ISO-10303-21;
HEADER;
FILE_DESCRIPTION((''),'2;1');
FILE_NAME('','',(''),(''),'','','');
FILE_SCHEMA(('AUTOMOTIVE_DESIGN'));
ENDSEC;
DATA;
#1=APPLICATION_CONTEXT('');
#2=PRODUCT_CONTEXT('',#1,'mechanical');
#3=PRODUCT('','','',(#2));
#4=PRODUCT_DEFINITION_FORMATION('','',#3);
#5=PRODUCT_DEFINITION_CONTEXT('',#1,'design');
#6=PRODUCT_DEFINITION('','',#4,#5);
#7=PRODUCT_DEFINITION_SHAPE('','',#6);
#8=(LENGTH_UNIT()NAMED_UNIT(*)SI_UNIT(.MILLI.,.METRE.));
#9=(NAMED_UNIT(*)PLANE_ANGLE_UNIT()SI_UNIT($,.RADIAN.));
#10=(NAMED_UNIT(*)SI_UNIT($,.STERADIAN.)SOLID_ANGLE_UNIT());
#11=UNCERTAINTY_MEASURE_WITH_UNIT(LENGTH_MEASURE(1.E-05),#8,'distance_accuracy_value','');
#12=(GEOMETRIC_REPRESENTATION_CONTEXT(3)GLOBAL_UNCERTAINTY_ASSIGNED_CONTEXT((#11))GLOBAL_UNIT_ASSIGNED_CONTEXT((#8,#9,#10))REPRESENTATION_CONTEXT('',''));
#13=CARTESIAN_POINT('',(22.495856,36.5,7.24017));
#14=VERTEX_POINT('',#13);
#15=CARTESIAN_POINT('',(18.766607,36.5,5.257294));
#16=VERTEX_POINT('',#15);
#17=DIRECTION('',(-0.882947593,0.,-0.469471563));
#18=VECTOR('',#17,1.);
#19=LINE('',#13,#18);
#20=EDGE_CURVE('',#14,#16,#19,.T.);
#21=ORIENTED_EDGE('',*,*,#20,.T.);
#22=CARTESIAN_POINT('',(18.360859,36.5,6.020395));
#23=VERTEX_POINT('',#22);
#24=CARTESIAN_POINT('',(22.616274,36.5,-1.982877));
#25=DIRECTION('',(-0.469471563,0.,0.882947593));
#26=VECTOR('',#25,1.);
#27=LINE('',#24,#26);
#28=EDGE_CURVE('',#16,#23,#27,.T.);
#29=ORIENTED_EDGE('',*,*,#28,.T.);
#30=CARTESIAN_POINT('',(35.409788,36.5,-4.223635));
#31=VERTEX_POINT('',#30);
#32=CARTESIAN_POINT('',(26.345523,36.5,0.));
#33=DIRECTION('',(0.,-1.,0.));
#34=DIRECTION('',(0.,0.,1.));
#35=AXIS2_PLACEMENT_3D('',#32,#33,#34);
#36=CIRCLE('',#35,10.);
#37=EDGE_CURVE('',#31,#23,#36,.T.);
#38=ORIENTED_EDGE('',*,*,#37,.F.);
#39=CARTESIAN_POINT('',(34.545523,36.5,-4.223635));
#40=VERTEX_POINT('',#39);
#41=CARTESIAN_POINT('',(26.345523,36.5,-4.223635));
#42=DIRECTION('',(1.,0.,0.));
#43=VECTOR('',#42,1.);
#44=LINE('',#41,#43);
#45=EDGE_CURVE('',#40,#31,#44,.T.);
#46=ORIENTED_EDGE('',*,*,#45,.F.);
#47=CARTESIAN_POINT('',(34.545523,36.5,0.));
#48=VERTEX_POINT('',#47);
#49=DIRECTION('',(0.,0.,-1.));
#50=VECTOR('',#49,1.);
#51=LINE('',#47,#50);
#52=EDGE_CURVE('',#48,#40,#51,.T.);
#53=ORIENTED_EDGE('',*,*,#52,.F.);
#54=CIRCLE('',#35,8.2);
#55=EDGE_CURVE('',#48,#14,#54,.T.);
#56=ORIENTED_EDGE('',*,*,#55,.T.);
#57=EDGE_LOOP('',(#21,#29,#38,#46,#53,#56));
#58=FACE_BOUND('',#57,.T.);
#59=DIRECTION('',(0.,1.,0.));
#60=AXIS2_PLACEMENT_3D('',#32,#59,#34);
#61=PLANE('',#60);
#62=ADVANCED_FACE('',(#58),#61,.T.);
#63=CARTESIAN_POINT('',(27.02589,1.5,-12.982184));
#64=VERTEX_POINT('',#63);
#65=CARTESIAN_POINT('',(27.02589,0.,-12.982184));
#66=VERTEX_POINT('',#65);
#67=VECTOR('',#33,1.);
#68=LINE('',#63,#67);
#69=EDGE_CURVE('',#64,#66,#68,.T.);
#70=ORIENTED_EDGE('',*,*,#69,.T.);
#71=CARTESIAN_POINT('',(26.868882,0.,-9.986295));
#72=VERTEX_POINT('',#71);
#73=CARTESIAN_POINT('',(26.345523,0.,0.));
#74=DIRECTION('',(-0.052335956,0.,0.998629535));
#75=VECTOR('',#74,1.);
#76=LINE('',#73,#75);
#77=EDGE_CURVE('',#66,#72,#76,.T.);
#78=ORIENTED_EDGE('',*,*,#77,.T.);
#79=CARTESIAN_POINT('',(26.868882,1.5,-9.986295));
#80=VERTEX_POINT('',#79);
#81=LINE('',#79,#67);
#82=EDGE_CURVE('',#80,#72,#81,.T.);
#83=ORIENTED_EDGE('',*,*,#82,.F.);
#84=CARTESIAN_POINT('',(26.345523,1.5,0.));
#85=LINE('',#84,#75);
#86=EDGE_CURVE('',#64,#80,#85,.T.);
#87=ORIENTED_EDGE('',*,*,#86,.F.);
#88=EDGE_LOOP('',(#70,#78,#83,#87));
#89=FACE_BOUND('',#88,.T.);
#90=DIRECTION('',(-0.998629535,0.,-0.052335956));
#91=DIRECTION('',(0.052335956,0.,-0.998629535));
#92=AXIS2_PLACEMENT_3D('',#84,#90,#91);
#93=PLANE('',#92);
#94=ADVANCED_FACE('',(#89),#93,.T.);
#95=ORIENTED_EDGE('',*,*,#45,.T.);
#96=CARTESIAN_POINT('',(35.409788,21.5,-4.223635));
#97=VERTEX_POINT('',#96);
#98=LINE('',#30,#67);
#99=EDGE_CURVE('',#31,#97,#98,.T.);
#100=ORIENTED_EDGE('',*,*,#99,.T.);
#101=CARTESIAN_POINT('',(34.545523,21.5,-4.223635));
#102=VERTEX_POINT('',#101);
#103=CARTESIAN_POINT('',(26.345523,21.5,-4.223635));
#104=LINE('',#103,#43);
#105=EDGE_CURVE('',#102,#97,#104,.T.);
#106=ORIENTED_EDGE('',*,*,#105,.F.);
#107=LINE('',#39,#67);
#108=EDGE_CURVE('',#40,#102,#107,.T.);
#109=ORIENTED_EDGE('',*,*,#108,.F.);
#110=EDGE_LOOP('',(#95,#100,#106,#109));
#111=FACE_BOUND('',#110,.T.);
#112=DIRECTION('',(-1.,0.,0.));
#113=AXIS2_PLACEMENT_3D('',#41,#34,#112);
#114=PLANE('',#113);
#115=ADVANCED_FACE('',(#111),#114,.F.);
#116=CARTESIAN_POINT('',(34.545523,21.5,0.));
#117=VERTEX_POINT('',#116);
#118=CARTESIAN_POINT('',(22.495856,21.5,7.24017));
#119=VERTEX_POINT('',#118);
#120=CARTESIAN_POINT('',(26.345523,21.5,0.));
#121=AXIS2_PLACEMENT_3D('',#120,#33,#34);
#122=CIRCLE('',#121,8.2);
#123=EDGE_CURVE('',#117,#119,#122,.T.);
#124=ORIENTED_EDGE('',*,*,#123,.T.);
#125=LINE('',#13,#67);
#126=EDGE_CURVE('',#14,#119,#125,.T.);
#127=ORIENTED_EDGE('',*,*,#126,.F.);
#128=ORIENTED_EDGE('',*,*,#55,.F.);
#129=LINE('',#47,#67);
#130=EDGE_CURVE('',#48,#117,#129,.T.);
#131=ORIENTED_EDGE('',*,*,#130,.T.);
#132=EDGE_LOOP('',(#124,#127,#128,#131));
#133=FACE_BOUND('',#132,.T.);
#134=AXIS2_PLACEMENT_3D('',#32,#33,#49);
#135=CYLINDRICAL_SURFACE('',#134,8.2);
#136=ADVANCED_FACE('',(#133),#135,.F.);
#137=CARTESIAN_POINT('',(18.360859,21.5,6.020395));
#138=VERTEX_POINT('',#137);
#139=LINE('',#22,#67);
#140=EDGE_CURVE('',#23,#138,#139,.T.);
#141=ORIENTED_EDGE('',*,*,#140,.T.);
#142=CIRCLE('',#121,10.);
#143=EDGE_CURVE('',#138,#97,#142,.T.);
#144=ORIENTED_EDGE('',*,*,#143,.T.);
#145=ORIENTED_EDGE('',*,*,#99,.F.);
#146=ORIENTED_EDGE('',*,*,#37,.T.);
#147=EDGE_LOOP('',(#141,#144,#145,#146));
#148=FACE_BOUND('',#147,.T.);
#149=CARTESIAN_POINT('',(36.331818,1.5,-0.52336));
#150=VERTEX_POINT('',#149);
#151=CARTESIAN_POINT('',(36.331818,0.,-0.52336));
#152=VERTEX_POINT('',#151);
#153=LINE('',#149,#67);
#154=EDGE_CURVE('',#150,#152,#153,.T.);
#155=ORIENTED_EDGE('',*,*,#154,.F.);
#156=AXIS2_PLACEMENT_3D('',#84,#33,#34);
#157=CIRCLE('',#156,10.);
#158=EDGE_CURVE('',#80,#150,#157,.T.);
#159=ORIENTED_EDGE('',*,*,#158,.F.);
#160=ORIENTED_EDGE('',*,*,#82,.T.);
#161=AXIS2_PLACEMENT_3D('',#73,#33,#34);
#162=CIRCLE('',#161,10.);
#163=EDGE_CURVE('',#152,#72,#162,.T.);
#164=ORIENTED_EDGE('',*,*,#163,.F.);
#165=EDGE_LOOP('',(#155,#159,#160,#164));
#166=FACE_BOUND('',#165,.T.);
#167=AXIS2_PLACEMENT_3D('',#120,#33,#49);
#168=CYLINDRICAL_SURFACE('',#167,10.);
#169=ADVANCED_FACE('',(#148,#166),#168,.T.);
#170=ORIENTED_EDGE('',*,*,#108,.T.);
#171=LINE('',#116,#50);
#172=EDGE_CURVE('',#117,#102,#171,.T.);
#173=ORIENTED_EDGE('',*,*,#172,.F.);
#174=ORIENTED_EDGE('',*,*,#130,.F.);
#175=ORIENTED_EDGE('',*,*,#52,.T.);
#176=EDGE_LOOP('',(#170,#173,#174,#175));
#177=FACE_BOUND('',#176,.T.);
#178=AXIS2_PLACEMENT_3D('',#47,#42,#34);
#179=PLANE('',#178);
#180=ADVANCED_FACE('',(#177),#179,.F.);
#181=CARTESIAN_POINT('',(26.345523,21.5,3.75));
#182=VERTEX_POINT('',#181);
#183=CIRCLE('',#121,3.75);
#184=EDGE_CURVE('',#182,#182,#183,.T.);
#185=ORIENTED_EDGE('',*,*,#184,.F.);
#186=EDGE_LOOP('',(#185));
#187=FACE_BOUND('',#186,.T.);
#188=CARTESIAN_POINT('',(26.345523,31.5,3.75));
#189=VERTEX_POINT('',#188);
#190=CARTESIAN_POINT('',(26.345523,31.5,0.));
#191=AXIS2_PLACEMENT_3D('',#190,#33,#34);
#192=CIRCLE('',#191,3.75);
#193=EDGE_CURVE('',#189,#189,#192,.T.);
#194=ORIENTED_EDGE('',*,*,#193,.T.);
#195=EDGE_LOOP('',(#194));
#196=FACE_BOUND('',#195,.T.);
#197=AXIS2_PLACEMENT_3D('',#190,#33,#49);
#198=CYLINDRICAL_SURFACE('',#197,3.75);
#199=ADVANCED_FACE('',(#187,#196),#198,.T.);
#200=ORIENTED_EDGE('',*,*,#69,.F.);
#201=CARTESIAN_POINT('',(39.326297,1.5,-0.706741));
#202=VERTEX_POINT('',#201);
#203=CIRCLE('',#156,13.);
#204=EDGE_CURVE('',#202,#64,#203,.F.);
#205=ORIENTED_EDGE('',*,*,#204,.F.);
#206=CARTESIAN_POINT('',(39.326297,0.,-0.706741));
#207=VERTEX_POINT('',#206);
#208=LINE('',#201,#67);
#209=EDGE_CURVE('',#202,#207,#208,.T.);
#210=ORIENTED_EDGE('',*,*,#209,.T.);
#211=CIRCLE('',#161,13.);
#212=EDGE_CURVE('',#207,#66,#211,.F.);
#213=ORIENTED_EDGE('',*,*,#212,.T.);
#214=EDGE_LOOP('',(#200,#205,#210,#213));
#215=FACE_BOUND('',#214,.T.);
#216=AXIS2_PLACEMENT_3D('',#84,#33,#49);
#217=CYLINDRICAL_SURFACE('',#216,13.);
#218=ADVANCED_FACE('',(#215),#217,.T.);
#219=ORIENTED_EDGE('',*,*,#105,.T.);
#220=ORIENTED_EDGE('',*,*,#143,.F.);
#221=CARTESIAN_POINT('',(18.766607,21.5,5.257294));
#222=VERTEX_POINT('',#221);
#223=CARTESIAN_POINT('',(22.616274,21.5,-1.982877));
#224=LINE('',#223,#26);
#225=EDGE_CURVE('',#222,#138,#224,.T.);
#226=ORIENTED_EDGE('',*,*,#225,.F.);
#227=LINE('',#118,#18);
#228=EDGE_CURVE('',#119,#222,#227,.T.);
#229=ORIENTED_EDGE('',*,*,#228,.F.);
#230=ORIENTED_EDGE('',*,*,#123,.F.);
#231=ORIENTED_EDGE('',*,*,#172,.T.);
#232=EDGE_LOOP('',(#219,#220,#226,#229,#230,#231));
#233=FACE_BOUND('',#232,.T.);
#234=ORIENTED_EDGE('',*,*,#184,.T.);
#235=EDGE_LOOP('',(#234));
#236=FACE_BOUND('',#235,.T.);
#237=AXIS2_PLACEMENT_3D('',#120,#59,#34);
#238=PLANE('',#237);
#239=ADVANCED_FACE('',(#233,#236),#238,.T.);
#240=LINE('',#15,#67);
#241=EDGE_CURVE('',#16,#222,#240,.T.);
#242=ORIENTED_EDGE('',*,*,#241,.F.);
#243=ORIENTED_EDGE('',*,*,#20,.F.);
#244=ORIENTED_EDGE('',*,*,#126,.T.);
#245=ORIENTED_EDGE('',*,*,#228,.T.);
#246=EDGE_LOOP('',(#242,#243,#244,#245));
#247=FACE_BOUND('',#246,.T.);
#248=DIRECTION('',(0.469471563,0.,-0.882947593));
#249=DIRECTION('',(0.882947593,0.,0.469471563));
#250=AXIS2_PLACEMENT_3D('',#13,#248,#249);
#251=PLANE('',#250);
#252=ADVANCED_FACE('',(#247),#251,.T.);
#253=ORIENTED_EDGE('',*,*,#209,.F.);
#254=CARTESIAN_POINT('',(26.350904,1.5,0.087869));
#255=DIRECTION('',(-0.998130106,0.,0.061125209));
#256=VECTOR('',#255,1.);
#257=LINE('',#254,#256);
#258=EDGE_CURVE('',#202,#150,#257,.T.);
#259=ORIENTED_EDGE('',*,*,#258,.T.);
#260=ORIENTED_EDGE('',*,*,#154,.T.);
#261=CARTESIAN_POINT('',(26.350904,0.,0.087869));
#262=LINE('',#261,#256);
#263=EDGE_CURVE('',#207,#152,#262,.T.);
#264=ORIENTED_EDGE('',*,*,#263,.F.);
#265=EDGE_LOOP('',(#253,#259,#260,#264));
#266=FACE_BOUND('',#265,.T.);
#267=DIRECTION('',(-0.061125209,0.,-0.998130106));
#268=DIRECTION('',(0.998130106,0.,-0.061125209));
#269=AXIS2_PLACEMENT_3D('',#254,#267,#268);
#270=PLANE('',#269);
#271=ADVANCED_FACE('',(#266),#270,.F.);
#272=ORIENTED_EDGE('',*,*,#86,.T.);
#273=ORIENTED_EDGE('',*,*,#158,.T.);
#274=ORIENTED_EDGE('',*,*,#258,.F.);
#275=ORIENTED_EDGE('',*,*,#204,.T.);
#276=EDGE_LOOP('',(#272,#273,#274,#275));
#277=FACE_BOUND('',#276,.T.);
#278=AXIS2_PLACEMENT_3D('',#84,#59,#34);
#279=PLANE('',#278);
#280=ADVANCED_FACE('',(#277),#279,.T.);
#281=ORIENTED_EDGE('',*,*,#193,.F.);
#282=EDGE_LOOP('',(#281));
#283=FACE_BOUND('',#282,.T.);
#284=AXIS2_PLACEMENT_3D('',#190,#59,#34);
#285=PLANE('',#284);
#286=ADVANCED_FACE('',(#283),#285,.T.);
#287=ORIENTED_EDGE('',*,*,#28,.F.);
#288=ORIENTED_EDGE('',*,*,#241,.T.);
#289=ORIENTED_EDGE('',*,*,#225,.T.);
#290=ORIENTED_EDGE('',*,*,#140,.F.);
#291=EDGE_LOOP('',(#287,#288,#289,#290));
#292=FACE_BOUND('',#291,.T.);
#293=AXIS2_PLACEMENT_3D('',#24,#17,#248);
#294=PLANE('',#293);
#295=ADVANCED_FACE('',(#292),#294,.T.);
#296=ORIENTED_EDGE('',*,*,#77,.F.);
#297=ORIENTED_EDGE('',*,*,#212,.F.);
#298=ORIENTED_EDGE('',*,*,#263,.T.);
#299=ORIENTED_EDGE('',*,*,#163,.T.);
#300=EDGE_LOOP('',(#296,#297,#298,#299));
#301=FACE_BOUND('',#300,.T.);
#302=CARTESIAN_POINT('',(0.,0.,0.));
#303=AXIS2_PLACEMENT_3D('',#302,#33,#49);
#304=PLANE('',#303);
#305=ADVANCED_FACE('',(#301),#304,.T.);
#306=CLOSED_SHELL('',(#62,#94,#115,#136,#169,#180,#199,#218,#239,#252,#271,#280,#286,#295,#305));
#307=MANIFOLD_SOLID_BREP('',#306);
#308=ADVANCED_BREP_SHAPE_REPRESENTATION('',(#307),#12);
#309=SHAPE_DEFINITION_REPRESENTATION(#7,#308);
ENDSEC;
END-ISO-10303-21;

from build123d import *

# Parameters (mm, degrees)
SKETCH1_R           = 10
SKETCH1_R_2         = 7.636363636
BOSS_EXTRUDE1_DEPTH = 21.5
BOSS_EXTRUDE2_DEPTH = 15
SKETCH3_R           = 3.75
BOSS_EXTRUDE3_DEPTH = 10
BOSS_EXTRUDE4_DEPTH = 1.5
SKETCH6_W           = 32.555421104
SKETCH6_H           = 30.593451785
BOSS_EXTRUDE5_DEPTH = 1.5
SKETCH8_W           = 32.555421103
SKETCH8_H           = 30.593451785
CUT_EXTRUDE1_DEPTH  = 1.5


# Read off the part's stored shape, not the designer's step: Boss-Extrude4
with BuildPart() as part:
    # Sketch1 → Boss-Extrude1 (new body)
    # profile 1 of 2: a face of its own
    with BuildSketch(Plane(origin=(0, 0, 0), x_dir=(1, 0, 0), z_dir=(0, 1, 0))):
        with Locations(Location((0, 0, 0), (0, 0, 270))):
            Circle(SKETCH1_R)
        Circle(SKETCH1_R_2, mode=Mode.SUBTRACT)
    # profile 2 of 2: a face of its own
    with BuildSketch(Plane(origin=(0, 0, 0), x_dir=(1, 0, 0), z_dir=(0, 1, 0))):
        Circle(SKETCH1_R_2)
    extrude(amount=BOSS_EXTRUDE1_DEPTH)

    # Sketch2 → Boss-Extrude2 (add)
    with BuildSketch(Plane(origin=(0, 21.5, 0), x_dir=(1, 0, 0), z_dir=(0, 1, 0))):
        with BuildLine():
            ThreePointArc((3.849666815, -7.240170261), (-4.223312214, -7.028771866), (-8.2, 0))
            Line((-8.2, 0), (-10, 0))
            ThreePointArc((-10, 0), (-5.150380749, -8.571673007), (4.694715628, -8.829475929))
            Line((4.694715628, -8.829475929), (3.849666815, -7.240170261))
        make_face()
        with BuildLine():
            Line((7.578915355, -5.257293639), (3.849666815, -7.240170261))
            Line((3.849666815, -7.240170261), (4.694715628, -8.829475929))
            ThreePointArc((4.694715628, -8.829475929), (6.493411832, -7.604972241), (7.984663341, -6.020394615))
            Line((7.984663341, -6.020394615), (7.578915355, -5.257293639))
        make_face()
        with BuildLine():
            Line((-10, 0), (-8.2, 0))
            Line((-8.2, 0), (-8.2, 4.223635209))
            Line((-8.2, 4.223635209), (-9.064265311, 4.223635209))
            ThreePointArc((-9.064265311, 4.223635209), (-9.763264134, 2.163024144), (-10, 0))
        make_face()
    extrude(amount=BOSS_EXTRUDE2_DEPTH)

    # Sketch3 → Boss-Extrude3 (add)
    with BuildSketch(Plane(origin=(0, 21.5, 0), x_dir=(1, 0, 0), z_dir=(0, 1, 0))):
        with Locations(Location((0, 0, 0), (0, 0, 270))):
            Circle(SKETCH3_R)
    extrude(amount=BOSS_EXTRUDE3_DEPTH)

    # Boss-Extrude4 outline → Boss-Extrude4 (add)
    with BuildSketch(Plane(origin=(0, 0, 0), x_dir=(1, 0, 0), z_dir=(0, 1, 0))):
        with BuildLine():
            ThreePointArc((-0.680367431, 12.982183952), (-9.183045771, 9.201721054), (-12.980774925, 0.706740657))
            Line((-12.980774925, 0.706740657), (-9.986295348, 0.523359562))
            Line((-9.986295348, 0.523359562), (-1.440215285, 0))
            Line((-1.440215285, 0), (0, 0))
            Line((0, 0), (-0.523359562, 9.986295348))
            Line((-0.523359562, 9.986295348), (-0.680367431, 12.982183952))
        make_face()
    extrude(amount=BOSS_EXTRUDE4_DEPTH)

    # Sketch6 → Boss-Extrude5 (add)
    with BuildSketch(Plane.XZ):
        with Locations((-3.104949277, 0.730287835)):
            Rectangle(SKETCH6_W, SKETCH6_H)
    extrude(amount=BOSS_EXTRUDE5_DEPTH)


with BuildPart() as body_2:
    # Mirror6: mirrored copy
    add(part.part.mirror(Plane(origin=(13.172761275, -1.5, 16.027013728), x_dir=(0, 0, 1), z_dir=(-1, 0, 0))))

    # Sketch8 → Cut-Extrude1 (cut)
    with BuildSketch(Plane.XZ.offset(1.5)):
        with Locations((29.450471826, 0.730287835)):
            Rectangle(SKETCH8_W, SKETCH8_H)
    extrude(amount=-CUT_EXTRUDE1_DEPTH, mode=Mode.SUBTRACT)


solid = body_2.part
